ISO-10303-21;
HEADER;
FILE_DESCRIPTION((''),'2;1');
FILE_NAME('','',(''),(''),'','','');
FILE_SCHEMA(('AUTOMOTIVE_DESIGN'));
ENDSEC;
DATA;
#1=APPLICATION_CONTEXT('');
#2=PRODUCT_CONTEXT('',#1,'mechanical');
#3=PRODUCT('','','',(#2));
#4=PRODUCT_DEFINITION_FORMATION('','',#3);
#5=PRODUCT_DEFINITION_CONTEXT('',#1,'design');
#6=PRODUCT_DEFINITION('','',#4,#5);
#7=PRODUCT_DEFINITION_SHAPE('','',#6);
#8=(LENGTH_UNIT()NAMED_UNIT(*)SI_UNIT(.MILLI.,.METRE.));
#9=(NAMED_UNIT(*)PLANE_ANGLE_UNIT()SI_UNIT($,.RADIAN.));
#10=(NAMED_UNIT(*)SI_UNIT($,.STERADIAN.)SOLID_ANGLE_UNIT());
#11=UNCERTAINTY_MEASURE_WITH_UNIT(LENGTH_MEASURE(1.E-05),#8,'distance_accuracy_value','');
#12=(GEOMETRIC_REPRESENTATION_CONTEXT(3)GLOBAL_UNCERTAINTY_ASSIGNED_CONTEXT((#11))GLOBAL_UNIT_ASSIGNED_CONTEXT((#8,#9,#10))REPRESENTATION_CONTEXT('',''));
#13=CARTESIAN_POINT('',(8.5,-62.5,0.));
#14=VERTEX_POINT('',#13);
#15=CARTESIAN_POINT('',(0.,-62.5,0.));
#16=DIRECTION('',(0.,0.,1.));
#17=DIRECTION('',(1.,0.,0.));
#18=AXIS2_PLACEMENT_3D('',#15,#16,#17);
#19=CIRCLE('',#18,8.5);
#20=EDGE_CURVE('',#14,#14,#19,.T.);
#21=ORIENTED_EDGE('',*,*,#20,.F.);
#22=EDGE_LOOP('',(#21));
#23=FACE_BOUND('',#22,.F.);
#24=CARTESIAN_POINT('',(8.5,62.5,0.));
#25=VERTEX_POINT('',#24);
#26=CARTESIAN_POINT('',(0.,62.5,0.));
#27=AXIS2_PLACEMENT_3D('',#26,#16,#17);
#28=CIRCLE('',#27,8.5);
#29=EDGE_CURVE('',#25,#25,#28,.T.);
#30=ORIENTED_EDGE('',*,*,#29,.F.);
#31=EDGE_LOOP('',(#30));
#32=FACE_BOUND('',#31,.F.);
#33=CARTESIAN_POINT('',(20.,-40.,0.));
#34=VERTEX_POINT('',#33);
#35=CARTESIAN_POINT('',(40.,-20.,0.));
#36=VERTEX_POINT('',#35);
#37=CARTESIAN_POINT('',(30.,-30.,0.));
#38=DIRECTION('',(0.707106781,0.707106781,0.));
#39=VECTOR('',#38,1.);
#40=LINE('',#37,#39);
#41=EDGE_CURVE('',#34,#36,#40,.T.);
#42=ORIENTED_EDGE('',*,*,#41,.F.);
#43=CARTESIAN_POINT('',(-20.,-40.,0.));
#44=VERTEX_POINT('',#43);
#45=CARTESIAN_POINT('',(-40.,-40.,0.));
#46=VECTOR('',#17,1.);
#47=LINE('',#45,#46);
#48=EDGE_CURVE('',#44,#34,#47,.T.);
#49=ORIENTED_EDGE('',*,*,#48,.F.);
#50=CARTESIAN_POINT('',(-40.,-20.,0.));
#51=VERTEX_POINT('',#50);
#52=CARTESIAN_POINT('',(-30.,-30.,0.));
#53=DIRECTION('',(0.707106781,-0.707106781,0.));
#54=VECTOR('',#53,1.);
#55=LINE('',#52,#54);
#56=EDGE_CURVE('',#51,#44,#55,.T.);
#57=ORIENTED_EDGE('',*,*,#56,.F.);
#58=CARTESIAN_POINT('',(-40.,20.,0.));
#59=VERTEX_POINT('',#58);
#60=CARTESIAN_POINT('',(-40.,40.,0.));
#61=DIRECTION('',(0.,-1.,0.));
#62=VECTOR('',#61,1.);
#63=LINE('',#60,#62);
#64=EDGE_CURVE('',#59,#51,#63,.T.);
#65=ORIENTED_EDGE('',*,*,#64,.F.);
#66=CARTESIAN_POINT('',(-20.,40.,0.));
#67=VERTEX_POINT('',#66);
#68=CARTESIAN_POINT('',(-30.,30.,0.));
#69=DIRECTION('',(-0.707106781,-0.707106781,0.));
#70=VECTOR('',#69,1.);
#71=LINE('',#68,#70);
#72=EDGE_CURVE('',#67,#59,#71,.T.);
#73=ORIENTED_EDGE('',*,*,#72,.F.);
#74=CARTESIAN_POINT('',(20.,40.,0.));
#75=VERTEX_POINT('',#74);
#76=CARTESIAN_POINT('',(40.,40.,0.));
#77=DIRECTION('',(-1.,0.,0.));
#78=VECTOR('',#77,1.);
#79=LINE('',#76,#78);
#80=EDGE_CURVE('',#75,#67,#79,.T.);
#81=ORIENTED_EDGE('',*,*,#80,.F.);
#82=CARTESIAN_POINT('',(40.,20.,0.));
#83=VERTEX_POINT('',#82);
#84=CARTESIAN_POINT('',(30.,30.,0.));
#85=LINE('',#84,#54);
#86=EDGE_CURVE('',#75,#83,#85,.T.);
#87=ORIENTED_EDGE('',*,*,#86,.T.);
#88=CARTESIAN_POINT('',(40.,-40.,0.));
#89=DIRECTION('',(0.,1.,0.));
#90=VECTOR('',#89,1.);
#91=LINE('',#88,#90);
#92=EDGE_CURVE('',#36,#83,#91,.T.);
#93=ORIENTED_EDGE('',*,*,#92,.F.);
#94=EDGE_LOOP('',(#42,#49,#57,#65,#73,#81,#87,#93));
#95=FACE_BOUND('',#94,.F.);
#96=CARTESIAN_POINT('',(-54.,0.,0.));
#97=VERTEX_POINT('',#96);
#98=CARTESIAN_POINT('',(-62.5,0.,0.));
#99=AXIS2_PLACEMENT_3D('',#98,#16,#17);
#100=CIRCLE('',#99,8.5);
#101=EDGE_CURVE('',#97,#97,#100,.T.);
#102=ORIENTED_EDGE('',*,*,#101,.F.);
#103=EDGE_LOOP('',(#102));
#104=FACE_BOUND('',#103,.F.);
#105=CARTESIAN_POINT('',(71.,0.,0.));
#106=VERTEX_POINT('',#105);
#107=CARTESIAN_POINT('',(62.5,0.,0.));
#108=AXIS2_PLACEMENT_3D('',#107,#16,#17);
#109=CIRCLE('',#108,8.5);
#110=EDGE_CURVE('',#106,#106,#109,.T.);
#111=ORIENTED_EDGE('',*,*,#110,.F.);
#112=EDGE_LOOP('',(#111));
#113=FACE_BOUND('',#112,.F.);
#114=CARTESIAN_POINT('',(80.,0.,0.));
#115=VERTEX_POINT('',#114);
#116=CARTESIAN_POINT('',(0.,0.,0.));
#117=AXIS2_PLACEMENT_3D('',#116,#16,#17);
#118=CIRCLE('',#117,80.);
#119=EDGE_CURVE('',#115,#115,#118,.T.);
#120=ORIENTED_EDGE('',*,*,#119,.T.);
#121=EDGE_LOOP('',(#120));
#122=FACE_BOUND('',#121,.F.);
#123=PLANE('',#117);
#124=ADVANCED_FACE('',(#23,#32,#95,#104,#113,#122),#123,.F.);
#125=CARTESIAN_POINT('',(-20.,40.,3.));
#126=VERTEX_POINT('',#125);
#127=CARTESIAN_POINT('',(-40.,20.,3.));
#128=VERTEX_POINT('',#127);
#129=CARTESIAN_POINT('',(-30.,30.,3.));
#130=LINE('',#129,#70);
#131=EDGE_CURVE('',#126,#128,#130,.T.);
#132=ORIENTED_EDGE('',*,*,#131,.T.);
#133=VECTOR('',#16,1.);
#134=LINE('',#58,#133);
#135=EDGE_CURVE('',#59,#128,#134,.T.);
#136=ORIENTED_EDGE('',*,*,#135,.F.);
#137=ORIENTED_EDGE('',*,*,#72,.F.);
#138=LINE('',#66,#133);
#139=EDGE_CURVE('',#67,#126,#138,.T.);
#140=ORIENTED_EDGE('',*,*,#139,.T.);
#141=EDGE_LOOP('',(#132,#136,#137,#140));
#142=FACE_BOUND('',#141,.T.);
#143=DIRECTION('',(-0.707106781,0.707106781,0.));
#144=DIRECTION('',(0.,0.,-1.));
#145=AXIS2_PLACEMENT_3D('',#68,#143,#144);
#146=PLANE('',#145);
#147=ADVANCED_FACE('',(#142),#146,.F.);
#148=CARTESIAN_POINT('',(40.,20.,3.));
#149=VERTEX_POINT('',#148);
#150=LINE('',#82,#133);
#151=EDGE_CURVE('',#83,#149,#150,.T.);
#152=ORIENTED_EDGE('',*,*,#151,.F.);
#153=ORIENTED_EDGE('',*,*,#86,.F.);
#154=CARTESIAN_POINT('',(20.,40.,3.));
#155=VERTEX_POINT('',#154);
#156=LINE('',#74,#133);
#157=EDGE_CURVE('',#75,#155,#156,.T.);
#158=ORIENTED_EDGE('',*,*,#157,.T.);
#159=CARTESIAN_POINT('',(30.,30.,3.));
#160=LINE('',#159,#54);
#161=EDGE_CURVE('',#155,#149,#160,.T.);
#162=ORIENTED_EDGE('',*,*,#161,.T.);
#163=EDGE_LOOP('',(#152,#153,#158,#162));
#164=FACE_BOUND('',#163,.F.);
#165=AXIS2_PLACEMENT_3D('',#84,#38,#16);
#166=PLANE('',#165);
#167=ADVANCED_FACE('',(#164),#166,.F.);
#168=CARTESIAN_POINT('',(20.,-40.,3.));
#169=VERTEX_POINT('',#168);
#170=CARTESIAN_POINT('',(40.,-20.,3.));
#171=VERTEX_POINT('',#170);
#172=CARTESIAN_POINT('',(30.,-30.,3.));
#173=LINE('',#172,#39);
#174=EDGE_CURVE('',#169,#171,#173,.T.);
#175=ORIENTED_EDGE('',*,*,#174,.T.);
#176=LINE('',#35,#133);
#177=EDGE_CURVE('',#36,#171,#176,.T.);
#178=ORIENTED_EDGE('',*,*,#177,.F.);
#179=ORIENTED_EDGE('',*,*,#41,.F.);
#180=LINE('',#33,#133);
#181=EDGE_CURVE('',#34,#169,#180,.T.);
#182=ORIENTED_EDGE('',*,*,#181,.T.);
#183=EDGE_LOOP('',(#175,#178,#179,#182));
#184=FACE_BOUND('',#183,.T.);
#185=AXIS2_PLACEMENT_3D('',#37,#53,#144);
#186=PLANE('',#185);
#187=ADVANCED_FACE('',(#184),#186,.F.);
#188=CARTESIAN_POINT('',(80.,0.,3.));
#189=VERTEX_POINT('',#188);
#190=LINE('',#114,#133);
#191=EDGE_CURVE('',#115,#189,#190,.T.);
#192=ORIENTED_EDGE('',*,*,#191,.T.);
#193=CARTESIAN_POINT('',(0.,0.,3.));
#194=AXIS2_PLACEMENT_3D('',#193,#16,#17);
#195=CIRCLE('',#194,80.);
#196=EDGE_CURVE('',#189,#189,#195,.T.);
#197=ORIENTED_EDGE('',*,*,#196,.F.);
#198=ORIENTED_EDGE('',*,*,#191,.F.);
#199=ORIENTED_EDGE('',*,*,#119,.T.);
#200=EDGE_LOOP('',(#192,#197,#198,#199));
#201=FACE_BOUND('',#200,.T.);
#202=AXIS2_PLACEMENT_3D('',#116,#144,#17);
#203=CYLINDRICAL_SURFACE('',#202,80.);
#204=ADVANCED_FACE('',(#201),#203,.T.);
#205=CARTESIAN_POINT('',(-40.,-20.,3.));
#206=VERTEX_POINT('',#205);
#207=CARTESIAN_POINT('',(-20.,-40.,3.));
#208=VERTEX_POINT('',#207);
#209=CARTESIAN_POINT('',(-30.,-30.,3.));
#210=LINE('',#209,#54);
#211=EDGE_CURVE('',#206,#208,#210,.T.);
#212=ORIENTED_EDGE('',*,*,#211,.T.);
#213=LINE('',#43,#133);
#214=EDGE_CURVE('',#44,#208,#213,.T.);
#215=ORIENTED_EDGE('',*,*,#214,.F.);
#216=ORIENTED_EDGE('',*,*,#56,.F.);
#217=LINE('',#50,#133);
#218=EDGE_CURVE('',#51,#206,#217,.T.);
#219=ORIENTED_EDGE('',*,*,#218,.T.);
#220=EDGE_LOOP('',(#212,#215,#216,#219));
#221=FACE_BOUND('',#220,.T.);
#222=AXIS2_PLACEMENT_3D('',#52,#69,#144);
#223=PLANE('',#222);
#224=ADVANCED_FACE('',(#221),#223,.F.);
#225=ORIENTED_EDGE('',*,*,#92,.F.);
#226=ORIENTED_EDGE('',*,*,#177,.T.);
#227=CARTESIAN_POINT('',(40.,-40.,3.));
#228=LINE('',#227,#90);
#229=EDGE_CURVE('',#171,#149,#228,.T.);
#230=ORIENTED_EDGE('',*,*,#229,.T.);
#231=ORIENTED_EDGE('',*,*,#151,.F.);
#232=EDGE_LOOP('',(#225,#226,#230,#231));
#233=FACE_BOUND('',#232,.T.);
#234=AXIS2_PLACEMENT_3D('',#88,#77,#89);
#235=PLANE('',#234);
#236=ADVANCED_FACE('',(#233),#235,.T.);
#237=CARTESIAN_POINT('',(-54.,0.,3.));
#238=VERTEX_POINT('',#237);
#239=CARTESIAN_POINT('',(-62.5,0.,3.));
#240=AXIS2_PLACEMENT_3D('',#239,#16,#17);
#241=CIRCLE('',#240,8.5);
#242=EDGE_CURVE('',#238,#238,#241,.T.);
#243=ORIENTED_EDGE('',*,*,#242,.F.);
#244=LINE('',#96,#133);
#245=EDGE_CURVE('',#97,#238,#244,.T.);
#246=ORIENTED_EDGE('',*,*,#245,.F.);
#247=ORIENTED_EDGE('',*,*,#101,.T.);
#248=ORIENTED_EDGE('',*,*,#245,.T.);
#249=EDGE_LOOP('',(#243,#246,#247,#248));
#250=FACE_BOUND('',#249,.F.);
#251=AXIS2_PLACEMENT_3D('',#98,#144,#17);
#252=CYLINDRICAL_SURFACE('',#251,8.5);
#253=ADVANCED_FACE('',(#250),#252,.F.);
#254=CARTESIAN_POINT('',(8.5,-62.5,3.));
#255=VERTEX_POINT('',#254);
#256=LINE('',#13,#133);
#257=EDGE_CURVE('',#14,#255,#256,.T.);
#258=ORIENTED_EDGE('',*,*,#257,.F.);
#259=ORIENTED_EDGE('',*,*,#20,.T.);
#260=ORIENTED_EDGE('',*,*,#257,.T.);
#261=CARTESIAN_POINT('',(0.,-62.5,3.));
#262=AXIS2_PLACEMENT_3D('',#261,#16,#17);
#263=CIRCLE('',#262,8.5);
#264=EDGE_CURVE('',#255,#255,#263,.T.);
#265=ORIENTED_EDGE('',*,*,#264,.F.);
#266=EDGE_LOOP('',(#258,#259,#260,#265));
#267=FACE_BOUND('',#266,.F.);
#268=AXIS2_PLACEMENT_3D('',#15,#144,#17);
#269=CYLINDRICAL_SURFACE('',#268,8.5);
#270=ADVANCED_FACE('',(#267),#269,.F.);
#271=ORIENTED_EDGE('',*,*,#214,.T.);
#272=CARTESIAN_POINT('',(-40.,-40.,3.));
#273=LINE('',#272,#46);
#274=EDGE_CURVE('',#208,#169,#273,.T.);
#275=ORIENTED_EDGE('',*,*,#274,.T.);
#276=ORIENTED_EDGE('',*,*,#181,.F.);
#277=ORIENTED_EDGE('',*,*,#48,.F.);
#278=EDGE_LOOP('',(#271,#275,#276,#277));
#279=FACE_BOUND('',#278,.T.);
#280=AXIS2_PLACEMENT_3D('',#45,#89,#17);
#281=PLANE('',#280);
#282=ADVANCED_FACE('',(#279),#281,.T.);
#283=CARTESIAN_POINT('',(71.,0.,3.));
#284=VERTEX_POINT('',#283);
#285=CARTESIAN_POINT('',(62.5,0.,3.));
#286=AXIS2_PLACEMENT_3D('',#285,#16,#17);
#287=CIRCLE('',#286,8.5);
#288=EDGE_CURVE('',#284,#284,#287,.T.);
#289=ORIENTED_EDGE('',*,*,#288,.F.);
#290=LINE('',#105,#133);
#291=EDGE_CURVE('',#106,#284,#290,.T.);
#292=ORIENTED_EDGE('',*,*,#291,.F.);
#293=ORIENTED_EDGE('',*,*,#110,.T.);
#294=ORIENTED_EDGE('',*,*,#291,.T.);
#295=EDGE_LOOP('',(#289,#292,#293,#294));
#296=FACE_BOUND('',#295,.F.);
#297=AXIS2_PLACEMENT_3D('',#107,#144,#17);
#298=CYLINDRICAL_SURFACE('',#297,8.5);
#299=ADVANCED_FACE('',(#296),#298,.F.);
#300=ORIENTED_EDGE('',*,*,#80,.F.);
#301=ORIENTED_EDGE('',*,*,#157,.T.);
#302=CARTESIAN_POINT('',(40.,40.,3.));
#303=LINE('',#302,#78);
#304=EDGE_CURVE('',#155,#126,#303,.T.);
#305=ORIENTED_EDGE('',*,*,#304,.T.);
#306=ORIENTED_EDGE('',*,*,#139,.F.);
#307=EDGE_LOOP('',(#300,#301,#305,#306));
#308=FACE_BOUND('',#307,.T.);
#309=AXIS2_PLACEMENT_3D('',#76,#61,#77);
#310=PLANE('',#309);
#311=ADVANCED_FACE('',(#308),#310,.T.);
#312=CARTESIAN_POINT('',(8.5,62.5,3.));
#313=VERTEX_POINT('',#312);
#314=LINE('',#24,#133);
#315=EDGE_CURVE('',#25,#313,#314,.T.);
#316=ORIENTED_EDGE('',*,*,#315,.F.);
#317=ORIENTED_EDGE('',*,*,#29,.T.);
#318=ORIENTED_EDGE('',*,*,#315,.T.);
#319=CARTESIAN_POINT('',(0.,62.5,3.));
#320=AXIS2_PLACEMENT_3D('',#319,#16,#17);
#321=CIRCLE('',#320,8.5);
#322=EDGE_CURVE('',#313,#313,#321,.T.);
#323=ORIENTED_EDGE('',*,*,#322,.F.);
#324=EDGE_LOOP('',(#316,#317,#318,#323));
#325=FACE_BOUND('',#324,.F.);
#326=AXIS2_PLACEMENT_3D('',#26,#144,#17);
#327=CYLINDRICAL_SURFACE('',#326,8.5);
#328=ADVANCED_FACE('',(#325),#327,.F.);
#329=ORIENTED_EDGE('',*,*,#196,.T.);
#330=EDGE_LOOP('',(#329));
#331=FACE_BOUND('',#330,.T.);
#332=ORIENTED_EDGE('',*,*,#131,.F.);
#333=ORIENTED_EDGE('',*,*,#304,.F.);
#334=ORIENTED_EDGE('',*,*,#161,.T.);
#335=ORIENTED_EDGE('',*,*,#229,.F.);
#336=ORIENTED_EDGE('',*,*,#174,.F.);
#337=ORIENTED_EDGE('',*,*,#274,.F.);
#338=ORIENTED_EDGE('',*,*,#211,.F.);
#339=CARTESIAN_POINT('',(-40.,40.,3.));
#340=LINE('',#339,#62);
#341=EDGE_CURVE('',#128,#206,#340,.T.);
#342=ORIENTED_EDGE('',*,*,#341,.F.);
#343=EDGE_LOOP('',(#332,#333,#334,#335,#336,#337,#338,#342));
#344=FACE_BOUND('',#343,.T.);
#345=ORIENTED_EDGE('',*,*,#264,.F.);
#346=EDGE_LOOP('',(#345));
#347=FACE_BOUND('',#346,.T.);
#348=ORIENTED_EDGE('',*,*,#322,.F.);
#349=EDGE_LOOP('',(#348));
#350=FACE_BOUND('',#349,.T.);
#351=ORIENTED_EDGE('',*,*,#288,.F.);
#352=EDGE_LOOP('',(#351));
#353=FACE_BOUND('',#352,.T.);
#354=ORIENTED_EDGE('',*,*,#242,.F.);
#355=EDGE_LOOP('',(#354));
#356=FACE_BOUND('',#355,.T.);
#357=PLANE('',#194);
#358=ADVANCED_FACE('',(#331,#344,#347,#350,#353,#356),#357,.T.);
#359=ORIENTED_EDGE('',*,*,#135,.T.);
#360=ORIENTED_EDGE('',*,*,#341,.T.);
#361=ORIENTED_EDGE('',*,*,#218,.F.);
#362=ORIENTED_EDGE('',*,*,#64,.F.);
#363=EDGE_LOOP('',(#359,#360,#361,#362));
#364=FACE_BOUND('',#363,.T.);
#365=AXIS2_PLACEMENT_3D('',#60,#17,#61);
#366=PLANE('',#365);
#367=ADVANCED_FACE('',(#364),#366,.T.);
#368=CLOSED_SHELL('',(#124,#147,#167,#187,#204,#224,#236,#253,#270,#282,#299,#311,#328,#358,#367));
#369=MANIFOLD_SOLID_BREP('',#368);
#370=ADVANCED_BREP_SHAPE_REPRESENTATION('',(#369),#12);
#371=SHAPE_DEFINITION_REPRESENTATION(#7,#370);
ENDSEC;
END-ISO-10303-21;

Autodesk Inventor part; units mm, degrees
ref_plane "YZ Plane" through (0, 0, 0) normal (1, 0, 0) x (0, 1, 0)
ref_plane "XZ Plane" through (0, 0, 0) normal (0, 1, 0) x (-1, 0, 0)
ref_plane "XY Plane" through (0, 0, 0) normal (0, 0, 1) x (1, 0, 0)
sketch "Sketch1" plane through (0, 0, 0) normal (0, 0, 1) x (1, 0, 0)
  circle A0 centre (0, 0) radius 80
  line L0 (40, 40) -> (-40, 40)
  line L1 (-40, 40) -> (-40, -40)
  line L2 (-40, -40) -> (40, -40)
  line L3 (40, -40) -> (40, 40)
  line L4 (40, 40) -> (-40, -40) construction
  line L5 (-40, 40) -> (40, -40) construction
  circle A1 centre (-62.5, 0) radius 8.5
  circle A2 centre (0, 0) radius 62.5 construction
  circle A3 centre (0, -62.5) radius 8.5
  circle A4 centre (62.5, 0) radius 8.5
  circle A5 centre (0, 62.5) radius 8.5
  dimension "d171" = 125
  dimension "d157" = 160
  dimension "d158" = 80
  dimension "d159" = 80
  dimension "d170" = 17
  dimension "d174" = 360
extrude "Plate5" add sketch "Sketch1" along normal blind 3
chamfer "Corner Chamfer2" distance 20 angle 45 4 edges at (-40, -40, 1.5) (40, -40, 1.5) (-40, 40, 1.5) (40, 40, 1.5)
properties part number "PRS 1200-59 FDS MAIN FLANGE" material "Stainless Steel"
